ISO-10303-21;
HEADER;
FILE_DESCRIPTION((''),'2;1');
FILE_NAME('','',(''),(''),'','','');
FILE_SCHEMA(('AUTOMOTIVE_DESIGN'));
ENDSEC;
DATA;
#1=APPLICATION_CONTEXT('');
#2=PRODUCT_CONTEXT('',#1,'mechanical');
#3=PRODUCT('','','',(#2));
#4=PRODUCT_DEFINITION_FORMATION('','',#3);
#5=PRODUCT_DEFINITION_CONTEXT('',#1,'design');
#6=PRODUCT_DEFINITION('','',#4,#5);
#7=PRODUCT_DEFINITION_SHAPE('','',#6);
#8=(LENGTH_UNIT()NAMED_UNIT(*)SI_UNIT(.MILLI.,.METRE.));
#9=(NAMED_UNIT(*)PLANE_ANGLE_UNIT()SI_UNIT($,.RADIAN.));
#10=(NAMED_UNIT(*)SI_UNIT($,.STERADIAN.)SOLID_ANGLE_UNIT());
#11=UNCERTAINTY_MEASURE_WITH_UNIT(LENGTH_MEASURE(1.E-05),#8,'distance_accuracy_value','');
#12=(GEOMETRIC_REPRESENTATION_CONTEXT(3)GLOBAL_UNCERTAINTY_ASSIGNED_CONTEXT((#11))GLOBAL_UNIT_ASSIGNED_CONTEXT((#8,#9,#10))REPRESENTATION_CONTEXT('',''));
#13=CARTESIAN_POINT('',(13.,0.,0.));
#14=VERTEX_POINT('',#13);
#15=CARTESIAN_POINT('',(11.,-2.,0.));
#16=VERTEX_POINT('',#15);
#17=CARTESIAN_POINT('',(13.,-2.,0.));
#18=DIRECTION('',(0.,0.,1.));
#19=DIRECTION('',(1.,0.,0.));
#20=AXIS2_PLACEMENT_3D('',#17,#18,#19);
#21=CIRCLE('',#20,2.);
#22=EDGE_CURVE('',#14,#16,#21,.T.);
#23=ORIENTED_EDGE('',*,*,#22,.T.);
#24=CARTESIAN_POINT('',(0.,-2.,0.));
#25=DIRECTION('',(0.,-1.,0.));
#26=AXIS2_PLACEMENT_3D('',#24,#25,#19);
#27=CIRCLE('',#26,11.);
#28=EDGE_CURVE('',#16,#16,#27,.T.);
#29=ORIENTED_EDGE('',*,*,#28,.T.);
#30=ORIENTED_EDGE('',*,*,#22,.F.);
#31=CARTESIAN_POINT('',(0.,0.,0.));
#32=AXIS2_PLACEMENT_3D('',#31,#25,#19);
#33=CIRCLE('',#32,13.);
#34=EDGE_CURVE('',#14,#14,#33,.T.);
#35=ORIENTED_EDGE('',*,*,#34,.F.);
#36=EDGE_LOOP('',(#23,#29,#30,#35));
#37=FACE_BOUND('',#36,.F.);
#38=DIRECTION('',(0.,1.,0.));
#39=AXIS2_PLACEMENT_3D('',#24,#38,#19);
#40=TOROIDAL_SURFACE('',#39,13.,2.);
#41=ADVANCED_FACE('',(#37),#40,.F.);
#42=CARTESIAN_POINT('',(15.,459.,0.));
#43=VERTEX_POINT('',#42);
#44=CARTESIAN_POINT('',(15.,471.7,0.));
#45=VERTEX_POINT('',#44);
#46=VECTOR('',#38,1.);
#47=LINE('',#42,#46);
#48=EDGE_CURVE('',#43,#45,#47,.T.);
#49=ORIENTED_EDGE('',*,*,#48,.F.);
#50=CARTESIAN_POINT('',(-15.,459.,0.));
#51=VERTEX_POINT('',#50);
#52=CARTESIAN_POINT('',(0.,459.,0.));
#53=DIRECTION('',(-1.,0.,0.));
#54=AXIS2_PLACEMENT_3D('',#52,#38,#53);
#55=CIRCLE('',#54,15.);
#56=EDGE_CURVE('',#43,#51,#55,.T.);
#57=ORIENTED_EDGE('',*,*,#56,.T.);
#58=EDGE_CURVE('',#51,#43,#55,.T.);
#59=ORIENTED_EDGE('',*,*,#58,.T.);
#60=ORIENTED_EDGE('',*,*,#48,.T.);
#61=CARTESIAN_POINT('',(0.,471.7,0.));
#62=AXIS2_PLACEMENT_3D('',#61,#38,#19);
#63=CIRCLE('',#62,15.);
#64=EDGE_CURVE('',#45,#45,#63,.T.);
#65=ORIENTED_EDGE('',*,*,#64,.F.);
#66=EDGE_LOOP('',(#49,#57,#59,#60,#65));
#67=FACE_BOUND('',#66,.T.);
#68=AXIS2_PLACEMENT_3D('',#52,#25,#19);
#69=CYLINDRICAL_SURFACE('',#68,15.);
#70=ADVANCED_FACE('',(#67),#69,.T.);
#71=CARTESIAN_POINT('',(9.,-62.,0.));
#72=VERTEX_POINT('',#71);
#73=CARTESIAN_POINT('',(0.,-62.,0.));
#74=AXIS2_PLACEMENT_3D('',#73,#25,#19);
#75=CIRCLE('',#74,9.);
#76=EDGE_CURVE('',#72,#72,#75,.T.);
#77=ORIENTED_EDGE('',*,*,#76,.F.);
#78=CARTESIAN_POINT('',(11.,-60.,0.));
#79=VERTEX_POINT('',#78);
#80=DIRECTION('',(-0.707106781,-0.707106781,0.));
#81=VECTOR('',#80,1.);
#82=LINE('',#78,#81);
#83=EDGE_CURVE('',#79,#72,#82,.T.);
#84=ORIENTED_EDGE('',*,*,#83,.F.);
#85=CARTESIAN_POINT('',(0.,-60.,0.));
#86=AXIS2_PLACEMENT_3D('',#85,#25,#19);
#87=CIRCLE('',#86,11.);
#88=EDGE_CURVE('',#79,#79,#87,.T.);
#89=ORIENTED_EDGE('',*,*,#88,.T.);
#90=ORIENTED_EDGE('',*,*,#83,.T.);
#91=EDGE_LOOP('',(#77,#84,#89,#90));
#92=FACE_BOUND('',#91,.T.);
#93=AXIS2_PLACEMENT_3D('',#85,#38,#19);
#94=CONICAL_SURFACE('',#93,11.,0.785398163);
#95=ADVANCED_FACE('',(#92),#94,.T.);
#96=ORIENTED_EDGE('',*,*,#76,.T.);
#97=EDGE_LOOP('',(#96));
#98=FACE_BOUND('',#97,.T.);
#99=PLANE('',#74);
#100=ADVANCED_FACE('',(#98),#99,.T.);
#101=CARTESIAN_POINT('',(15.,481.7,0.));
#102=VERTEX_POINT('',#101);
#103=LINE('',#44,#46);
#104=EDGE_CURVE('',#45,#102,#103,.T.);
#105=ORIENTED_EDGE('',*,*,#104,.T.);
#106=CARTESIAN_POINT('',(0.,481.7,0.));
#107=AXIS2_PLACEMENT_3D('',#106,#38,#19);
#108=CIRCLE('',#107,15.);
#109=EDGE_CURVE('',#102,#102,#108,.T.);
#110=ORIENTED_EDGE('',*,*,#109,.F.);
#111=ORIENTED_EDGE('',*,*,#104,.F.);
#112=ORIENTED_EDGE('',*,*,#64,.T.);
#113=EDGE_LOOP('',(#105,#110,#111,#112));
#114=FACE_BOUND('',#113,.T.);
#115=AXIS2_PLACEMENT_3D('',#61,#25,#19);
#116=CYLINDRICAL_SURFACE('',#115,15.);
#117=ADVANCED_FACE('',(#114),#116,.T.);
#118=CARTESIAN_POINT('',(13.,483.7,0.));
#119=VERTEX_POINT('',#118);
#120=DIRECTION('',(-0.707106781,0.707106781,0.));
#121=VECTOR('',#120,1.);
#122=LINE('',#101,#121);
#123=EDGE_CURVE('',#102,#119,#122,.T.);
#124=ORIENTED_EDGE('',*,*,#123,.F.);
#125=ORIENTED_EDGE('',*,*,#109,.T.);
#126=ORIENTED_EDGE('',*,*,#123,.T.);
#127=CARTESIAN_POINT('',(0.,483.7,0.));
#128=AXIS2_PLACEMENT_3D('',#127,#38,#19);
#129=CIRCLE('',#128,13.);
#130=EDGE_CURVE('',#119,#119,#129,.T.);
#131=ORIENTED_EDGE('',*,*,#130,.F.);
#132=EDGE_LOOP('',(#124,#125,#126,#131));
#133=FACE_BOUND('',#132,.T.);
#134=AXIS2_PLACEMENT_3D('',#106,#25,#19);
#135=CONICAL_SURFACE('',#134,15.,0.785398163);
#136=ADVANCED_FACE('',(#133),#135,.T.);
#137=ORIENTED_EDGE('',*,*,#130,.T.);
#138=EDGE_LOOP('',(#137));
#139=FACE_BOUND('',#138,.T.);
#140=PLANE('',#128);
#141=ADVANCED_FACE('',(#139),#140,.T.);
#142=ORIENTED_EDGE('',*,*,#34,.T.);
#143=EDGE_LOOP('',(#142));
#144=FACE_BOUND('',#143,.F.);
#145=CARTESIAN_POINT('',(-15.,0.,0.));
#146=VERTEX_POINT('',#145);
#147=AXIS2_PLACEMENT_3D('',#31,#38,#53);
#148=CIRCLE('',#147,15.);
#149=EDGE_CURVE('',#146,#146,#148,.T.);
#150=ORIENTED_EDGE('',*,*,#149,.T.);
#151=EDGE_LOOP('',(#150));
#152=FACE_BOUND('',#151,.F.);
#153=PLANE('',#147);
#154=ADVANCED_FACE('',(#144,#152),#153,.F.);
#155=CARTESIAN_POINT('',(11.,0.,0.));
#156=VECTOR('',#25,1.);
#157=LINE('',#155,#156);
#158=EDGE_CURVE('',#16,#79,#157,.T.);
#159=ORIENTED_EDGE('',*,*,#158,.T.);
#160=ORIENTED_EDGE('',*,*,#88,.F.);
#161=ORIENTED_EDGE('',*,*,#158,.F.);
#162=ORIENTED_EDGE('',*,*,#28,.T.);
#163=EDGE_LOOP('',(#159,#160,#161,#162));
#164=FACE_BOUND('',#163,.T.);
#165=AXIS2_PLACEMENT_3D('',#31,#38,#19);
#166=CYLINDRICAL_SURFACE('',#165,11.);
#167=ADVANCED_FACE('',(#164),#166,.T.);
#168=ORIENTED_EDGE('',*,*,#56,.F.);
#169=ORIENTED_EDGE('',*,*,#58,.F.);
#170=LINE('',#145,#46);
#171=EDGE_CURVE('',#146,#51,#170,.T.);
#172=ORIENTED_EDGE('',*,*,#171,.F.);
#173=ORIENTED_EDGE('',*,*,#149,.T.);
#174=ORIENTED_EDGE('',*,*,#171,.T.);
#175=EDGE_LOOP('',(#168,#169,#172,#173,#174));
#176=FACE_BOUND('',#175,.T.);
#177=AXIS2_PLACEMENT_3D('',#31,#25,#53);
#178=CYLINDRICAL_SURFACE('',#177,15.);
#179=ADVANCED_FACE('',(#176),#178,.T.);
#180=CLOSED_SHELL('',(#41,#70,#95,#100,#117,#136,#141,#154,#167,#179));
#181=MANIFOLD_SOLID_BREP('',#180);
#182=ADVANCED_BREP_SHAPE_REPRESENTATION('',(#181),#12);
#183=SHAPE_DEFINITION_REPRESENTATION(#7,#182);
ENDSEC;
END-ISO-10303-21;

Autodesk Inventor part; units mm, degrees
ref_plane "YZ Plane" through (0, 0, 0) normal (1, 0, 0) x (0, 1, 0)
ref_plane "XZ Plane" through (0, 0, 0) normal (0, 1, 0) x (-1, 0, 0)
ref_plane "XY Plane" through (0, 0, 0) normal (0, 0, 1) x (1, 0, 0)
sketch "Sketch1" plane through (0, 0, 0) normal (0, 1, 0) x (-1, 0, 0)
  circle A0 centre (0, 0) radius 15
  dimension "d0" = 30
extrude "Extrusion1" add sketch "Sketch1" along normal blind 459
sketch "Sketch2" plane through (0, 0, 0) normal (0, -1, 0) x (1, 0, 0)
  circle A0 centre (0, 0) radius 11
  dimension "d3" = 22
extrude "Extrusion2" add sketch "Sketch2" along normal blind 62
fillet "Fillet1" radius 2 1 edges at (-11, 0, 0)
sketch "Sketch3" plane through (0, 459, 0) normal (0, 1, 0) x (1, 0, 0)
  circle A0 centre (0, 0) radius 15
  dimension "d7" = 30
extrude "Extrusion3" add sketch "Sketch3" along normal blind 12.7
thread "Thread2" size "M22x3" class "6g" standard "ANSI Metric M Profile" length 60
sketch "Sketch4" plane through (0, 471.7, 0) normal (0, 1, 0) x (1, 0, 0)
  circle A0 centre (0, 0) radius 15 projected
extrude "Extrusion4" add sketch "Sketch4" along normal blind 12
thread "Thread3" size "M30x3.5" class "6g" standard "ANSI Metric M Profile" length 40
chamfer "Chamfer1" distance 2 angle 45 1 edges at (-15, 483.7, 0)
chamfer "Chamfer2" distance 2 angle 45 1 edges at (-11, -62, 0)
properties part number "BARRA SOPORTE"
